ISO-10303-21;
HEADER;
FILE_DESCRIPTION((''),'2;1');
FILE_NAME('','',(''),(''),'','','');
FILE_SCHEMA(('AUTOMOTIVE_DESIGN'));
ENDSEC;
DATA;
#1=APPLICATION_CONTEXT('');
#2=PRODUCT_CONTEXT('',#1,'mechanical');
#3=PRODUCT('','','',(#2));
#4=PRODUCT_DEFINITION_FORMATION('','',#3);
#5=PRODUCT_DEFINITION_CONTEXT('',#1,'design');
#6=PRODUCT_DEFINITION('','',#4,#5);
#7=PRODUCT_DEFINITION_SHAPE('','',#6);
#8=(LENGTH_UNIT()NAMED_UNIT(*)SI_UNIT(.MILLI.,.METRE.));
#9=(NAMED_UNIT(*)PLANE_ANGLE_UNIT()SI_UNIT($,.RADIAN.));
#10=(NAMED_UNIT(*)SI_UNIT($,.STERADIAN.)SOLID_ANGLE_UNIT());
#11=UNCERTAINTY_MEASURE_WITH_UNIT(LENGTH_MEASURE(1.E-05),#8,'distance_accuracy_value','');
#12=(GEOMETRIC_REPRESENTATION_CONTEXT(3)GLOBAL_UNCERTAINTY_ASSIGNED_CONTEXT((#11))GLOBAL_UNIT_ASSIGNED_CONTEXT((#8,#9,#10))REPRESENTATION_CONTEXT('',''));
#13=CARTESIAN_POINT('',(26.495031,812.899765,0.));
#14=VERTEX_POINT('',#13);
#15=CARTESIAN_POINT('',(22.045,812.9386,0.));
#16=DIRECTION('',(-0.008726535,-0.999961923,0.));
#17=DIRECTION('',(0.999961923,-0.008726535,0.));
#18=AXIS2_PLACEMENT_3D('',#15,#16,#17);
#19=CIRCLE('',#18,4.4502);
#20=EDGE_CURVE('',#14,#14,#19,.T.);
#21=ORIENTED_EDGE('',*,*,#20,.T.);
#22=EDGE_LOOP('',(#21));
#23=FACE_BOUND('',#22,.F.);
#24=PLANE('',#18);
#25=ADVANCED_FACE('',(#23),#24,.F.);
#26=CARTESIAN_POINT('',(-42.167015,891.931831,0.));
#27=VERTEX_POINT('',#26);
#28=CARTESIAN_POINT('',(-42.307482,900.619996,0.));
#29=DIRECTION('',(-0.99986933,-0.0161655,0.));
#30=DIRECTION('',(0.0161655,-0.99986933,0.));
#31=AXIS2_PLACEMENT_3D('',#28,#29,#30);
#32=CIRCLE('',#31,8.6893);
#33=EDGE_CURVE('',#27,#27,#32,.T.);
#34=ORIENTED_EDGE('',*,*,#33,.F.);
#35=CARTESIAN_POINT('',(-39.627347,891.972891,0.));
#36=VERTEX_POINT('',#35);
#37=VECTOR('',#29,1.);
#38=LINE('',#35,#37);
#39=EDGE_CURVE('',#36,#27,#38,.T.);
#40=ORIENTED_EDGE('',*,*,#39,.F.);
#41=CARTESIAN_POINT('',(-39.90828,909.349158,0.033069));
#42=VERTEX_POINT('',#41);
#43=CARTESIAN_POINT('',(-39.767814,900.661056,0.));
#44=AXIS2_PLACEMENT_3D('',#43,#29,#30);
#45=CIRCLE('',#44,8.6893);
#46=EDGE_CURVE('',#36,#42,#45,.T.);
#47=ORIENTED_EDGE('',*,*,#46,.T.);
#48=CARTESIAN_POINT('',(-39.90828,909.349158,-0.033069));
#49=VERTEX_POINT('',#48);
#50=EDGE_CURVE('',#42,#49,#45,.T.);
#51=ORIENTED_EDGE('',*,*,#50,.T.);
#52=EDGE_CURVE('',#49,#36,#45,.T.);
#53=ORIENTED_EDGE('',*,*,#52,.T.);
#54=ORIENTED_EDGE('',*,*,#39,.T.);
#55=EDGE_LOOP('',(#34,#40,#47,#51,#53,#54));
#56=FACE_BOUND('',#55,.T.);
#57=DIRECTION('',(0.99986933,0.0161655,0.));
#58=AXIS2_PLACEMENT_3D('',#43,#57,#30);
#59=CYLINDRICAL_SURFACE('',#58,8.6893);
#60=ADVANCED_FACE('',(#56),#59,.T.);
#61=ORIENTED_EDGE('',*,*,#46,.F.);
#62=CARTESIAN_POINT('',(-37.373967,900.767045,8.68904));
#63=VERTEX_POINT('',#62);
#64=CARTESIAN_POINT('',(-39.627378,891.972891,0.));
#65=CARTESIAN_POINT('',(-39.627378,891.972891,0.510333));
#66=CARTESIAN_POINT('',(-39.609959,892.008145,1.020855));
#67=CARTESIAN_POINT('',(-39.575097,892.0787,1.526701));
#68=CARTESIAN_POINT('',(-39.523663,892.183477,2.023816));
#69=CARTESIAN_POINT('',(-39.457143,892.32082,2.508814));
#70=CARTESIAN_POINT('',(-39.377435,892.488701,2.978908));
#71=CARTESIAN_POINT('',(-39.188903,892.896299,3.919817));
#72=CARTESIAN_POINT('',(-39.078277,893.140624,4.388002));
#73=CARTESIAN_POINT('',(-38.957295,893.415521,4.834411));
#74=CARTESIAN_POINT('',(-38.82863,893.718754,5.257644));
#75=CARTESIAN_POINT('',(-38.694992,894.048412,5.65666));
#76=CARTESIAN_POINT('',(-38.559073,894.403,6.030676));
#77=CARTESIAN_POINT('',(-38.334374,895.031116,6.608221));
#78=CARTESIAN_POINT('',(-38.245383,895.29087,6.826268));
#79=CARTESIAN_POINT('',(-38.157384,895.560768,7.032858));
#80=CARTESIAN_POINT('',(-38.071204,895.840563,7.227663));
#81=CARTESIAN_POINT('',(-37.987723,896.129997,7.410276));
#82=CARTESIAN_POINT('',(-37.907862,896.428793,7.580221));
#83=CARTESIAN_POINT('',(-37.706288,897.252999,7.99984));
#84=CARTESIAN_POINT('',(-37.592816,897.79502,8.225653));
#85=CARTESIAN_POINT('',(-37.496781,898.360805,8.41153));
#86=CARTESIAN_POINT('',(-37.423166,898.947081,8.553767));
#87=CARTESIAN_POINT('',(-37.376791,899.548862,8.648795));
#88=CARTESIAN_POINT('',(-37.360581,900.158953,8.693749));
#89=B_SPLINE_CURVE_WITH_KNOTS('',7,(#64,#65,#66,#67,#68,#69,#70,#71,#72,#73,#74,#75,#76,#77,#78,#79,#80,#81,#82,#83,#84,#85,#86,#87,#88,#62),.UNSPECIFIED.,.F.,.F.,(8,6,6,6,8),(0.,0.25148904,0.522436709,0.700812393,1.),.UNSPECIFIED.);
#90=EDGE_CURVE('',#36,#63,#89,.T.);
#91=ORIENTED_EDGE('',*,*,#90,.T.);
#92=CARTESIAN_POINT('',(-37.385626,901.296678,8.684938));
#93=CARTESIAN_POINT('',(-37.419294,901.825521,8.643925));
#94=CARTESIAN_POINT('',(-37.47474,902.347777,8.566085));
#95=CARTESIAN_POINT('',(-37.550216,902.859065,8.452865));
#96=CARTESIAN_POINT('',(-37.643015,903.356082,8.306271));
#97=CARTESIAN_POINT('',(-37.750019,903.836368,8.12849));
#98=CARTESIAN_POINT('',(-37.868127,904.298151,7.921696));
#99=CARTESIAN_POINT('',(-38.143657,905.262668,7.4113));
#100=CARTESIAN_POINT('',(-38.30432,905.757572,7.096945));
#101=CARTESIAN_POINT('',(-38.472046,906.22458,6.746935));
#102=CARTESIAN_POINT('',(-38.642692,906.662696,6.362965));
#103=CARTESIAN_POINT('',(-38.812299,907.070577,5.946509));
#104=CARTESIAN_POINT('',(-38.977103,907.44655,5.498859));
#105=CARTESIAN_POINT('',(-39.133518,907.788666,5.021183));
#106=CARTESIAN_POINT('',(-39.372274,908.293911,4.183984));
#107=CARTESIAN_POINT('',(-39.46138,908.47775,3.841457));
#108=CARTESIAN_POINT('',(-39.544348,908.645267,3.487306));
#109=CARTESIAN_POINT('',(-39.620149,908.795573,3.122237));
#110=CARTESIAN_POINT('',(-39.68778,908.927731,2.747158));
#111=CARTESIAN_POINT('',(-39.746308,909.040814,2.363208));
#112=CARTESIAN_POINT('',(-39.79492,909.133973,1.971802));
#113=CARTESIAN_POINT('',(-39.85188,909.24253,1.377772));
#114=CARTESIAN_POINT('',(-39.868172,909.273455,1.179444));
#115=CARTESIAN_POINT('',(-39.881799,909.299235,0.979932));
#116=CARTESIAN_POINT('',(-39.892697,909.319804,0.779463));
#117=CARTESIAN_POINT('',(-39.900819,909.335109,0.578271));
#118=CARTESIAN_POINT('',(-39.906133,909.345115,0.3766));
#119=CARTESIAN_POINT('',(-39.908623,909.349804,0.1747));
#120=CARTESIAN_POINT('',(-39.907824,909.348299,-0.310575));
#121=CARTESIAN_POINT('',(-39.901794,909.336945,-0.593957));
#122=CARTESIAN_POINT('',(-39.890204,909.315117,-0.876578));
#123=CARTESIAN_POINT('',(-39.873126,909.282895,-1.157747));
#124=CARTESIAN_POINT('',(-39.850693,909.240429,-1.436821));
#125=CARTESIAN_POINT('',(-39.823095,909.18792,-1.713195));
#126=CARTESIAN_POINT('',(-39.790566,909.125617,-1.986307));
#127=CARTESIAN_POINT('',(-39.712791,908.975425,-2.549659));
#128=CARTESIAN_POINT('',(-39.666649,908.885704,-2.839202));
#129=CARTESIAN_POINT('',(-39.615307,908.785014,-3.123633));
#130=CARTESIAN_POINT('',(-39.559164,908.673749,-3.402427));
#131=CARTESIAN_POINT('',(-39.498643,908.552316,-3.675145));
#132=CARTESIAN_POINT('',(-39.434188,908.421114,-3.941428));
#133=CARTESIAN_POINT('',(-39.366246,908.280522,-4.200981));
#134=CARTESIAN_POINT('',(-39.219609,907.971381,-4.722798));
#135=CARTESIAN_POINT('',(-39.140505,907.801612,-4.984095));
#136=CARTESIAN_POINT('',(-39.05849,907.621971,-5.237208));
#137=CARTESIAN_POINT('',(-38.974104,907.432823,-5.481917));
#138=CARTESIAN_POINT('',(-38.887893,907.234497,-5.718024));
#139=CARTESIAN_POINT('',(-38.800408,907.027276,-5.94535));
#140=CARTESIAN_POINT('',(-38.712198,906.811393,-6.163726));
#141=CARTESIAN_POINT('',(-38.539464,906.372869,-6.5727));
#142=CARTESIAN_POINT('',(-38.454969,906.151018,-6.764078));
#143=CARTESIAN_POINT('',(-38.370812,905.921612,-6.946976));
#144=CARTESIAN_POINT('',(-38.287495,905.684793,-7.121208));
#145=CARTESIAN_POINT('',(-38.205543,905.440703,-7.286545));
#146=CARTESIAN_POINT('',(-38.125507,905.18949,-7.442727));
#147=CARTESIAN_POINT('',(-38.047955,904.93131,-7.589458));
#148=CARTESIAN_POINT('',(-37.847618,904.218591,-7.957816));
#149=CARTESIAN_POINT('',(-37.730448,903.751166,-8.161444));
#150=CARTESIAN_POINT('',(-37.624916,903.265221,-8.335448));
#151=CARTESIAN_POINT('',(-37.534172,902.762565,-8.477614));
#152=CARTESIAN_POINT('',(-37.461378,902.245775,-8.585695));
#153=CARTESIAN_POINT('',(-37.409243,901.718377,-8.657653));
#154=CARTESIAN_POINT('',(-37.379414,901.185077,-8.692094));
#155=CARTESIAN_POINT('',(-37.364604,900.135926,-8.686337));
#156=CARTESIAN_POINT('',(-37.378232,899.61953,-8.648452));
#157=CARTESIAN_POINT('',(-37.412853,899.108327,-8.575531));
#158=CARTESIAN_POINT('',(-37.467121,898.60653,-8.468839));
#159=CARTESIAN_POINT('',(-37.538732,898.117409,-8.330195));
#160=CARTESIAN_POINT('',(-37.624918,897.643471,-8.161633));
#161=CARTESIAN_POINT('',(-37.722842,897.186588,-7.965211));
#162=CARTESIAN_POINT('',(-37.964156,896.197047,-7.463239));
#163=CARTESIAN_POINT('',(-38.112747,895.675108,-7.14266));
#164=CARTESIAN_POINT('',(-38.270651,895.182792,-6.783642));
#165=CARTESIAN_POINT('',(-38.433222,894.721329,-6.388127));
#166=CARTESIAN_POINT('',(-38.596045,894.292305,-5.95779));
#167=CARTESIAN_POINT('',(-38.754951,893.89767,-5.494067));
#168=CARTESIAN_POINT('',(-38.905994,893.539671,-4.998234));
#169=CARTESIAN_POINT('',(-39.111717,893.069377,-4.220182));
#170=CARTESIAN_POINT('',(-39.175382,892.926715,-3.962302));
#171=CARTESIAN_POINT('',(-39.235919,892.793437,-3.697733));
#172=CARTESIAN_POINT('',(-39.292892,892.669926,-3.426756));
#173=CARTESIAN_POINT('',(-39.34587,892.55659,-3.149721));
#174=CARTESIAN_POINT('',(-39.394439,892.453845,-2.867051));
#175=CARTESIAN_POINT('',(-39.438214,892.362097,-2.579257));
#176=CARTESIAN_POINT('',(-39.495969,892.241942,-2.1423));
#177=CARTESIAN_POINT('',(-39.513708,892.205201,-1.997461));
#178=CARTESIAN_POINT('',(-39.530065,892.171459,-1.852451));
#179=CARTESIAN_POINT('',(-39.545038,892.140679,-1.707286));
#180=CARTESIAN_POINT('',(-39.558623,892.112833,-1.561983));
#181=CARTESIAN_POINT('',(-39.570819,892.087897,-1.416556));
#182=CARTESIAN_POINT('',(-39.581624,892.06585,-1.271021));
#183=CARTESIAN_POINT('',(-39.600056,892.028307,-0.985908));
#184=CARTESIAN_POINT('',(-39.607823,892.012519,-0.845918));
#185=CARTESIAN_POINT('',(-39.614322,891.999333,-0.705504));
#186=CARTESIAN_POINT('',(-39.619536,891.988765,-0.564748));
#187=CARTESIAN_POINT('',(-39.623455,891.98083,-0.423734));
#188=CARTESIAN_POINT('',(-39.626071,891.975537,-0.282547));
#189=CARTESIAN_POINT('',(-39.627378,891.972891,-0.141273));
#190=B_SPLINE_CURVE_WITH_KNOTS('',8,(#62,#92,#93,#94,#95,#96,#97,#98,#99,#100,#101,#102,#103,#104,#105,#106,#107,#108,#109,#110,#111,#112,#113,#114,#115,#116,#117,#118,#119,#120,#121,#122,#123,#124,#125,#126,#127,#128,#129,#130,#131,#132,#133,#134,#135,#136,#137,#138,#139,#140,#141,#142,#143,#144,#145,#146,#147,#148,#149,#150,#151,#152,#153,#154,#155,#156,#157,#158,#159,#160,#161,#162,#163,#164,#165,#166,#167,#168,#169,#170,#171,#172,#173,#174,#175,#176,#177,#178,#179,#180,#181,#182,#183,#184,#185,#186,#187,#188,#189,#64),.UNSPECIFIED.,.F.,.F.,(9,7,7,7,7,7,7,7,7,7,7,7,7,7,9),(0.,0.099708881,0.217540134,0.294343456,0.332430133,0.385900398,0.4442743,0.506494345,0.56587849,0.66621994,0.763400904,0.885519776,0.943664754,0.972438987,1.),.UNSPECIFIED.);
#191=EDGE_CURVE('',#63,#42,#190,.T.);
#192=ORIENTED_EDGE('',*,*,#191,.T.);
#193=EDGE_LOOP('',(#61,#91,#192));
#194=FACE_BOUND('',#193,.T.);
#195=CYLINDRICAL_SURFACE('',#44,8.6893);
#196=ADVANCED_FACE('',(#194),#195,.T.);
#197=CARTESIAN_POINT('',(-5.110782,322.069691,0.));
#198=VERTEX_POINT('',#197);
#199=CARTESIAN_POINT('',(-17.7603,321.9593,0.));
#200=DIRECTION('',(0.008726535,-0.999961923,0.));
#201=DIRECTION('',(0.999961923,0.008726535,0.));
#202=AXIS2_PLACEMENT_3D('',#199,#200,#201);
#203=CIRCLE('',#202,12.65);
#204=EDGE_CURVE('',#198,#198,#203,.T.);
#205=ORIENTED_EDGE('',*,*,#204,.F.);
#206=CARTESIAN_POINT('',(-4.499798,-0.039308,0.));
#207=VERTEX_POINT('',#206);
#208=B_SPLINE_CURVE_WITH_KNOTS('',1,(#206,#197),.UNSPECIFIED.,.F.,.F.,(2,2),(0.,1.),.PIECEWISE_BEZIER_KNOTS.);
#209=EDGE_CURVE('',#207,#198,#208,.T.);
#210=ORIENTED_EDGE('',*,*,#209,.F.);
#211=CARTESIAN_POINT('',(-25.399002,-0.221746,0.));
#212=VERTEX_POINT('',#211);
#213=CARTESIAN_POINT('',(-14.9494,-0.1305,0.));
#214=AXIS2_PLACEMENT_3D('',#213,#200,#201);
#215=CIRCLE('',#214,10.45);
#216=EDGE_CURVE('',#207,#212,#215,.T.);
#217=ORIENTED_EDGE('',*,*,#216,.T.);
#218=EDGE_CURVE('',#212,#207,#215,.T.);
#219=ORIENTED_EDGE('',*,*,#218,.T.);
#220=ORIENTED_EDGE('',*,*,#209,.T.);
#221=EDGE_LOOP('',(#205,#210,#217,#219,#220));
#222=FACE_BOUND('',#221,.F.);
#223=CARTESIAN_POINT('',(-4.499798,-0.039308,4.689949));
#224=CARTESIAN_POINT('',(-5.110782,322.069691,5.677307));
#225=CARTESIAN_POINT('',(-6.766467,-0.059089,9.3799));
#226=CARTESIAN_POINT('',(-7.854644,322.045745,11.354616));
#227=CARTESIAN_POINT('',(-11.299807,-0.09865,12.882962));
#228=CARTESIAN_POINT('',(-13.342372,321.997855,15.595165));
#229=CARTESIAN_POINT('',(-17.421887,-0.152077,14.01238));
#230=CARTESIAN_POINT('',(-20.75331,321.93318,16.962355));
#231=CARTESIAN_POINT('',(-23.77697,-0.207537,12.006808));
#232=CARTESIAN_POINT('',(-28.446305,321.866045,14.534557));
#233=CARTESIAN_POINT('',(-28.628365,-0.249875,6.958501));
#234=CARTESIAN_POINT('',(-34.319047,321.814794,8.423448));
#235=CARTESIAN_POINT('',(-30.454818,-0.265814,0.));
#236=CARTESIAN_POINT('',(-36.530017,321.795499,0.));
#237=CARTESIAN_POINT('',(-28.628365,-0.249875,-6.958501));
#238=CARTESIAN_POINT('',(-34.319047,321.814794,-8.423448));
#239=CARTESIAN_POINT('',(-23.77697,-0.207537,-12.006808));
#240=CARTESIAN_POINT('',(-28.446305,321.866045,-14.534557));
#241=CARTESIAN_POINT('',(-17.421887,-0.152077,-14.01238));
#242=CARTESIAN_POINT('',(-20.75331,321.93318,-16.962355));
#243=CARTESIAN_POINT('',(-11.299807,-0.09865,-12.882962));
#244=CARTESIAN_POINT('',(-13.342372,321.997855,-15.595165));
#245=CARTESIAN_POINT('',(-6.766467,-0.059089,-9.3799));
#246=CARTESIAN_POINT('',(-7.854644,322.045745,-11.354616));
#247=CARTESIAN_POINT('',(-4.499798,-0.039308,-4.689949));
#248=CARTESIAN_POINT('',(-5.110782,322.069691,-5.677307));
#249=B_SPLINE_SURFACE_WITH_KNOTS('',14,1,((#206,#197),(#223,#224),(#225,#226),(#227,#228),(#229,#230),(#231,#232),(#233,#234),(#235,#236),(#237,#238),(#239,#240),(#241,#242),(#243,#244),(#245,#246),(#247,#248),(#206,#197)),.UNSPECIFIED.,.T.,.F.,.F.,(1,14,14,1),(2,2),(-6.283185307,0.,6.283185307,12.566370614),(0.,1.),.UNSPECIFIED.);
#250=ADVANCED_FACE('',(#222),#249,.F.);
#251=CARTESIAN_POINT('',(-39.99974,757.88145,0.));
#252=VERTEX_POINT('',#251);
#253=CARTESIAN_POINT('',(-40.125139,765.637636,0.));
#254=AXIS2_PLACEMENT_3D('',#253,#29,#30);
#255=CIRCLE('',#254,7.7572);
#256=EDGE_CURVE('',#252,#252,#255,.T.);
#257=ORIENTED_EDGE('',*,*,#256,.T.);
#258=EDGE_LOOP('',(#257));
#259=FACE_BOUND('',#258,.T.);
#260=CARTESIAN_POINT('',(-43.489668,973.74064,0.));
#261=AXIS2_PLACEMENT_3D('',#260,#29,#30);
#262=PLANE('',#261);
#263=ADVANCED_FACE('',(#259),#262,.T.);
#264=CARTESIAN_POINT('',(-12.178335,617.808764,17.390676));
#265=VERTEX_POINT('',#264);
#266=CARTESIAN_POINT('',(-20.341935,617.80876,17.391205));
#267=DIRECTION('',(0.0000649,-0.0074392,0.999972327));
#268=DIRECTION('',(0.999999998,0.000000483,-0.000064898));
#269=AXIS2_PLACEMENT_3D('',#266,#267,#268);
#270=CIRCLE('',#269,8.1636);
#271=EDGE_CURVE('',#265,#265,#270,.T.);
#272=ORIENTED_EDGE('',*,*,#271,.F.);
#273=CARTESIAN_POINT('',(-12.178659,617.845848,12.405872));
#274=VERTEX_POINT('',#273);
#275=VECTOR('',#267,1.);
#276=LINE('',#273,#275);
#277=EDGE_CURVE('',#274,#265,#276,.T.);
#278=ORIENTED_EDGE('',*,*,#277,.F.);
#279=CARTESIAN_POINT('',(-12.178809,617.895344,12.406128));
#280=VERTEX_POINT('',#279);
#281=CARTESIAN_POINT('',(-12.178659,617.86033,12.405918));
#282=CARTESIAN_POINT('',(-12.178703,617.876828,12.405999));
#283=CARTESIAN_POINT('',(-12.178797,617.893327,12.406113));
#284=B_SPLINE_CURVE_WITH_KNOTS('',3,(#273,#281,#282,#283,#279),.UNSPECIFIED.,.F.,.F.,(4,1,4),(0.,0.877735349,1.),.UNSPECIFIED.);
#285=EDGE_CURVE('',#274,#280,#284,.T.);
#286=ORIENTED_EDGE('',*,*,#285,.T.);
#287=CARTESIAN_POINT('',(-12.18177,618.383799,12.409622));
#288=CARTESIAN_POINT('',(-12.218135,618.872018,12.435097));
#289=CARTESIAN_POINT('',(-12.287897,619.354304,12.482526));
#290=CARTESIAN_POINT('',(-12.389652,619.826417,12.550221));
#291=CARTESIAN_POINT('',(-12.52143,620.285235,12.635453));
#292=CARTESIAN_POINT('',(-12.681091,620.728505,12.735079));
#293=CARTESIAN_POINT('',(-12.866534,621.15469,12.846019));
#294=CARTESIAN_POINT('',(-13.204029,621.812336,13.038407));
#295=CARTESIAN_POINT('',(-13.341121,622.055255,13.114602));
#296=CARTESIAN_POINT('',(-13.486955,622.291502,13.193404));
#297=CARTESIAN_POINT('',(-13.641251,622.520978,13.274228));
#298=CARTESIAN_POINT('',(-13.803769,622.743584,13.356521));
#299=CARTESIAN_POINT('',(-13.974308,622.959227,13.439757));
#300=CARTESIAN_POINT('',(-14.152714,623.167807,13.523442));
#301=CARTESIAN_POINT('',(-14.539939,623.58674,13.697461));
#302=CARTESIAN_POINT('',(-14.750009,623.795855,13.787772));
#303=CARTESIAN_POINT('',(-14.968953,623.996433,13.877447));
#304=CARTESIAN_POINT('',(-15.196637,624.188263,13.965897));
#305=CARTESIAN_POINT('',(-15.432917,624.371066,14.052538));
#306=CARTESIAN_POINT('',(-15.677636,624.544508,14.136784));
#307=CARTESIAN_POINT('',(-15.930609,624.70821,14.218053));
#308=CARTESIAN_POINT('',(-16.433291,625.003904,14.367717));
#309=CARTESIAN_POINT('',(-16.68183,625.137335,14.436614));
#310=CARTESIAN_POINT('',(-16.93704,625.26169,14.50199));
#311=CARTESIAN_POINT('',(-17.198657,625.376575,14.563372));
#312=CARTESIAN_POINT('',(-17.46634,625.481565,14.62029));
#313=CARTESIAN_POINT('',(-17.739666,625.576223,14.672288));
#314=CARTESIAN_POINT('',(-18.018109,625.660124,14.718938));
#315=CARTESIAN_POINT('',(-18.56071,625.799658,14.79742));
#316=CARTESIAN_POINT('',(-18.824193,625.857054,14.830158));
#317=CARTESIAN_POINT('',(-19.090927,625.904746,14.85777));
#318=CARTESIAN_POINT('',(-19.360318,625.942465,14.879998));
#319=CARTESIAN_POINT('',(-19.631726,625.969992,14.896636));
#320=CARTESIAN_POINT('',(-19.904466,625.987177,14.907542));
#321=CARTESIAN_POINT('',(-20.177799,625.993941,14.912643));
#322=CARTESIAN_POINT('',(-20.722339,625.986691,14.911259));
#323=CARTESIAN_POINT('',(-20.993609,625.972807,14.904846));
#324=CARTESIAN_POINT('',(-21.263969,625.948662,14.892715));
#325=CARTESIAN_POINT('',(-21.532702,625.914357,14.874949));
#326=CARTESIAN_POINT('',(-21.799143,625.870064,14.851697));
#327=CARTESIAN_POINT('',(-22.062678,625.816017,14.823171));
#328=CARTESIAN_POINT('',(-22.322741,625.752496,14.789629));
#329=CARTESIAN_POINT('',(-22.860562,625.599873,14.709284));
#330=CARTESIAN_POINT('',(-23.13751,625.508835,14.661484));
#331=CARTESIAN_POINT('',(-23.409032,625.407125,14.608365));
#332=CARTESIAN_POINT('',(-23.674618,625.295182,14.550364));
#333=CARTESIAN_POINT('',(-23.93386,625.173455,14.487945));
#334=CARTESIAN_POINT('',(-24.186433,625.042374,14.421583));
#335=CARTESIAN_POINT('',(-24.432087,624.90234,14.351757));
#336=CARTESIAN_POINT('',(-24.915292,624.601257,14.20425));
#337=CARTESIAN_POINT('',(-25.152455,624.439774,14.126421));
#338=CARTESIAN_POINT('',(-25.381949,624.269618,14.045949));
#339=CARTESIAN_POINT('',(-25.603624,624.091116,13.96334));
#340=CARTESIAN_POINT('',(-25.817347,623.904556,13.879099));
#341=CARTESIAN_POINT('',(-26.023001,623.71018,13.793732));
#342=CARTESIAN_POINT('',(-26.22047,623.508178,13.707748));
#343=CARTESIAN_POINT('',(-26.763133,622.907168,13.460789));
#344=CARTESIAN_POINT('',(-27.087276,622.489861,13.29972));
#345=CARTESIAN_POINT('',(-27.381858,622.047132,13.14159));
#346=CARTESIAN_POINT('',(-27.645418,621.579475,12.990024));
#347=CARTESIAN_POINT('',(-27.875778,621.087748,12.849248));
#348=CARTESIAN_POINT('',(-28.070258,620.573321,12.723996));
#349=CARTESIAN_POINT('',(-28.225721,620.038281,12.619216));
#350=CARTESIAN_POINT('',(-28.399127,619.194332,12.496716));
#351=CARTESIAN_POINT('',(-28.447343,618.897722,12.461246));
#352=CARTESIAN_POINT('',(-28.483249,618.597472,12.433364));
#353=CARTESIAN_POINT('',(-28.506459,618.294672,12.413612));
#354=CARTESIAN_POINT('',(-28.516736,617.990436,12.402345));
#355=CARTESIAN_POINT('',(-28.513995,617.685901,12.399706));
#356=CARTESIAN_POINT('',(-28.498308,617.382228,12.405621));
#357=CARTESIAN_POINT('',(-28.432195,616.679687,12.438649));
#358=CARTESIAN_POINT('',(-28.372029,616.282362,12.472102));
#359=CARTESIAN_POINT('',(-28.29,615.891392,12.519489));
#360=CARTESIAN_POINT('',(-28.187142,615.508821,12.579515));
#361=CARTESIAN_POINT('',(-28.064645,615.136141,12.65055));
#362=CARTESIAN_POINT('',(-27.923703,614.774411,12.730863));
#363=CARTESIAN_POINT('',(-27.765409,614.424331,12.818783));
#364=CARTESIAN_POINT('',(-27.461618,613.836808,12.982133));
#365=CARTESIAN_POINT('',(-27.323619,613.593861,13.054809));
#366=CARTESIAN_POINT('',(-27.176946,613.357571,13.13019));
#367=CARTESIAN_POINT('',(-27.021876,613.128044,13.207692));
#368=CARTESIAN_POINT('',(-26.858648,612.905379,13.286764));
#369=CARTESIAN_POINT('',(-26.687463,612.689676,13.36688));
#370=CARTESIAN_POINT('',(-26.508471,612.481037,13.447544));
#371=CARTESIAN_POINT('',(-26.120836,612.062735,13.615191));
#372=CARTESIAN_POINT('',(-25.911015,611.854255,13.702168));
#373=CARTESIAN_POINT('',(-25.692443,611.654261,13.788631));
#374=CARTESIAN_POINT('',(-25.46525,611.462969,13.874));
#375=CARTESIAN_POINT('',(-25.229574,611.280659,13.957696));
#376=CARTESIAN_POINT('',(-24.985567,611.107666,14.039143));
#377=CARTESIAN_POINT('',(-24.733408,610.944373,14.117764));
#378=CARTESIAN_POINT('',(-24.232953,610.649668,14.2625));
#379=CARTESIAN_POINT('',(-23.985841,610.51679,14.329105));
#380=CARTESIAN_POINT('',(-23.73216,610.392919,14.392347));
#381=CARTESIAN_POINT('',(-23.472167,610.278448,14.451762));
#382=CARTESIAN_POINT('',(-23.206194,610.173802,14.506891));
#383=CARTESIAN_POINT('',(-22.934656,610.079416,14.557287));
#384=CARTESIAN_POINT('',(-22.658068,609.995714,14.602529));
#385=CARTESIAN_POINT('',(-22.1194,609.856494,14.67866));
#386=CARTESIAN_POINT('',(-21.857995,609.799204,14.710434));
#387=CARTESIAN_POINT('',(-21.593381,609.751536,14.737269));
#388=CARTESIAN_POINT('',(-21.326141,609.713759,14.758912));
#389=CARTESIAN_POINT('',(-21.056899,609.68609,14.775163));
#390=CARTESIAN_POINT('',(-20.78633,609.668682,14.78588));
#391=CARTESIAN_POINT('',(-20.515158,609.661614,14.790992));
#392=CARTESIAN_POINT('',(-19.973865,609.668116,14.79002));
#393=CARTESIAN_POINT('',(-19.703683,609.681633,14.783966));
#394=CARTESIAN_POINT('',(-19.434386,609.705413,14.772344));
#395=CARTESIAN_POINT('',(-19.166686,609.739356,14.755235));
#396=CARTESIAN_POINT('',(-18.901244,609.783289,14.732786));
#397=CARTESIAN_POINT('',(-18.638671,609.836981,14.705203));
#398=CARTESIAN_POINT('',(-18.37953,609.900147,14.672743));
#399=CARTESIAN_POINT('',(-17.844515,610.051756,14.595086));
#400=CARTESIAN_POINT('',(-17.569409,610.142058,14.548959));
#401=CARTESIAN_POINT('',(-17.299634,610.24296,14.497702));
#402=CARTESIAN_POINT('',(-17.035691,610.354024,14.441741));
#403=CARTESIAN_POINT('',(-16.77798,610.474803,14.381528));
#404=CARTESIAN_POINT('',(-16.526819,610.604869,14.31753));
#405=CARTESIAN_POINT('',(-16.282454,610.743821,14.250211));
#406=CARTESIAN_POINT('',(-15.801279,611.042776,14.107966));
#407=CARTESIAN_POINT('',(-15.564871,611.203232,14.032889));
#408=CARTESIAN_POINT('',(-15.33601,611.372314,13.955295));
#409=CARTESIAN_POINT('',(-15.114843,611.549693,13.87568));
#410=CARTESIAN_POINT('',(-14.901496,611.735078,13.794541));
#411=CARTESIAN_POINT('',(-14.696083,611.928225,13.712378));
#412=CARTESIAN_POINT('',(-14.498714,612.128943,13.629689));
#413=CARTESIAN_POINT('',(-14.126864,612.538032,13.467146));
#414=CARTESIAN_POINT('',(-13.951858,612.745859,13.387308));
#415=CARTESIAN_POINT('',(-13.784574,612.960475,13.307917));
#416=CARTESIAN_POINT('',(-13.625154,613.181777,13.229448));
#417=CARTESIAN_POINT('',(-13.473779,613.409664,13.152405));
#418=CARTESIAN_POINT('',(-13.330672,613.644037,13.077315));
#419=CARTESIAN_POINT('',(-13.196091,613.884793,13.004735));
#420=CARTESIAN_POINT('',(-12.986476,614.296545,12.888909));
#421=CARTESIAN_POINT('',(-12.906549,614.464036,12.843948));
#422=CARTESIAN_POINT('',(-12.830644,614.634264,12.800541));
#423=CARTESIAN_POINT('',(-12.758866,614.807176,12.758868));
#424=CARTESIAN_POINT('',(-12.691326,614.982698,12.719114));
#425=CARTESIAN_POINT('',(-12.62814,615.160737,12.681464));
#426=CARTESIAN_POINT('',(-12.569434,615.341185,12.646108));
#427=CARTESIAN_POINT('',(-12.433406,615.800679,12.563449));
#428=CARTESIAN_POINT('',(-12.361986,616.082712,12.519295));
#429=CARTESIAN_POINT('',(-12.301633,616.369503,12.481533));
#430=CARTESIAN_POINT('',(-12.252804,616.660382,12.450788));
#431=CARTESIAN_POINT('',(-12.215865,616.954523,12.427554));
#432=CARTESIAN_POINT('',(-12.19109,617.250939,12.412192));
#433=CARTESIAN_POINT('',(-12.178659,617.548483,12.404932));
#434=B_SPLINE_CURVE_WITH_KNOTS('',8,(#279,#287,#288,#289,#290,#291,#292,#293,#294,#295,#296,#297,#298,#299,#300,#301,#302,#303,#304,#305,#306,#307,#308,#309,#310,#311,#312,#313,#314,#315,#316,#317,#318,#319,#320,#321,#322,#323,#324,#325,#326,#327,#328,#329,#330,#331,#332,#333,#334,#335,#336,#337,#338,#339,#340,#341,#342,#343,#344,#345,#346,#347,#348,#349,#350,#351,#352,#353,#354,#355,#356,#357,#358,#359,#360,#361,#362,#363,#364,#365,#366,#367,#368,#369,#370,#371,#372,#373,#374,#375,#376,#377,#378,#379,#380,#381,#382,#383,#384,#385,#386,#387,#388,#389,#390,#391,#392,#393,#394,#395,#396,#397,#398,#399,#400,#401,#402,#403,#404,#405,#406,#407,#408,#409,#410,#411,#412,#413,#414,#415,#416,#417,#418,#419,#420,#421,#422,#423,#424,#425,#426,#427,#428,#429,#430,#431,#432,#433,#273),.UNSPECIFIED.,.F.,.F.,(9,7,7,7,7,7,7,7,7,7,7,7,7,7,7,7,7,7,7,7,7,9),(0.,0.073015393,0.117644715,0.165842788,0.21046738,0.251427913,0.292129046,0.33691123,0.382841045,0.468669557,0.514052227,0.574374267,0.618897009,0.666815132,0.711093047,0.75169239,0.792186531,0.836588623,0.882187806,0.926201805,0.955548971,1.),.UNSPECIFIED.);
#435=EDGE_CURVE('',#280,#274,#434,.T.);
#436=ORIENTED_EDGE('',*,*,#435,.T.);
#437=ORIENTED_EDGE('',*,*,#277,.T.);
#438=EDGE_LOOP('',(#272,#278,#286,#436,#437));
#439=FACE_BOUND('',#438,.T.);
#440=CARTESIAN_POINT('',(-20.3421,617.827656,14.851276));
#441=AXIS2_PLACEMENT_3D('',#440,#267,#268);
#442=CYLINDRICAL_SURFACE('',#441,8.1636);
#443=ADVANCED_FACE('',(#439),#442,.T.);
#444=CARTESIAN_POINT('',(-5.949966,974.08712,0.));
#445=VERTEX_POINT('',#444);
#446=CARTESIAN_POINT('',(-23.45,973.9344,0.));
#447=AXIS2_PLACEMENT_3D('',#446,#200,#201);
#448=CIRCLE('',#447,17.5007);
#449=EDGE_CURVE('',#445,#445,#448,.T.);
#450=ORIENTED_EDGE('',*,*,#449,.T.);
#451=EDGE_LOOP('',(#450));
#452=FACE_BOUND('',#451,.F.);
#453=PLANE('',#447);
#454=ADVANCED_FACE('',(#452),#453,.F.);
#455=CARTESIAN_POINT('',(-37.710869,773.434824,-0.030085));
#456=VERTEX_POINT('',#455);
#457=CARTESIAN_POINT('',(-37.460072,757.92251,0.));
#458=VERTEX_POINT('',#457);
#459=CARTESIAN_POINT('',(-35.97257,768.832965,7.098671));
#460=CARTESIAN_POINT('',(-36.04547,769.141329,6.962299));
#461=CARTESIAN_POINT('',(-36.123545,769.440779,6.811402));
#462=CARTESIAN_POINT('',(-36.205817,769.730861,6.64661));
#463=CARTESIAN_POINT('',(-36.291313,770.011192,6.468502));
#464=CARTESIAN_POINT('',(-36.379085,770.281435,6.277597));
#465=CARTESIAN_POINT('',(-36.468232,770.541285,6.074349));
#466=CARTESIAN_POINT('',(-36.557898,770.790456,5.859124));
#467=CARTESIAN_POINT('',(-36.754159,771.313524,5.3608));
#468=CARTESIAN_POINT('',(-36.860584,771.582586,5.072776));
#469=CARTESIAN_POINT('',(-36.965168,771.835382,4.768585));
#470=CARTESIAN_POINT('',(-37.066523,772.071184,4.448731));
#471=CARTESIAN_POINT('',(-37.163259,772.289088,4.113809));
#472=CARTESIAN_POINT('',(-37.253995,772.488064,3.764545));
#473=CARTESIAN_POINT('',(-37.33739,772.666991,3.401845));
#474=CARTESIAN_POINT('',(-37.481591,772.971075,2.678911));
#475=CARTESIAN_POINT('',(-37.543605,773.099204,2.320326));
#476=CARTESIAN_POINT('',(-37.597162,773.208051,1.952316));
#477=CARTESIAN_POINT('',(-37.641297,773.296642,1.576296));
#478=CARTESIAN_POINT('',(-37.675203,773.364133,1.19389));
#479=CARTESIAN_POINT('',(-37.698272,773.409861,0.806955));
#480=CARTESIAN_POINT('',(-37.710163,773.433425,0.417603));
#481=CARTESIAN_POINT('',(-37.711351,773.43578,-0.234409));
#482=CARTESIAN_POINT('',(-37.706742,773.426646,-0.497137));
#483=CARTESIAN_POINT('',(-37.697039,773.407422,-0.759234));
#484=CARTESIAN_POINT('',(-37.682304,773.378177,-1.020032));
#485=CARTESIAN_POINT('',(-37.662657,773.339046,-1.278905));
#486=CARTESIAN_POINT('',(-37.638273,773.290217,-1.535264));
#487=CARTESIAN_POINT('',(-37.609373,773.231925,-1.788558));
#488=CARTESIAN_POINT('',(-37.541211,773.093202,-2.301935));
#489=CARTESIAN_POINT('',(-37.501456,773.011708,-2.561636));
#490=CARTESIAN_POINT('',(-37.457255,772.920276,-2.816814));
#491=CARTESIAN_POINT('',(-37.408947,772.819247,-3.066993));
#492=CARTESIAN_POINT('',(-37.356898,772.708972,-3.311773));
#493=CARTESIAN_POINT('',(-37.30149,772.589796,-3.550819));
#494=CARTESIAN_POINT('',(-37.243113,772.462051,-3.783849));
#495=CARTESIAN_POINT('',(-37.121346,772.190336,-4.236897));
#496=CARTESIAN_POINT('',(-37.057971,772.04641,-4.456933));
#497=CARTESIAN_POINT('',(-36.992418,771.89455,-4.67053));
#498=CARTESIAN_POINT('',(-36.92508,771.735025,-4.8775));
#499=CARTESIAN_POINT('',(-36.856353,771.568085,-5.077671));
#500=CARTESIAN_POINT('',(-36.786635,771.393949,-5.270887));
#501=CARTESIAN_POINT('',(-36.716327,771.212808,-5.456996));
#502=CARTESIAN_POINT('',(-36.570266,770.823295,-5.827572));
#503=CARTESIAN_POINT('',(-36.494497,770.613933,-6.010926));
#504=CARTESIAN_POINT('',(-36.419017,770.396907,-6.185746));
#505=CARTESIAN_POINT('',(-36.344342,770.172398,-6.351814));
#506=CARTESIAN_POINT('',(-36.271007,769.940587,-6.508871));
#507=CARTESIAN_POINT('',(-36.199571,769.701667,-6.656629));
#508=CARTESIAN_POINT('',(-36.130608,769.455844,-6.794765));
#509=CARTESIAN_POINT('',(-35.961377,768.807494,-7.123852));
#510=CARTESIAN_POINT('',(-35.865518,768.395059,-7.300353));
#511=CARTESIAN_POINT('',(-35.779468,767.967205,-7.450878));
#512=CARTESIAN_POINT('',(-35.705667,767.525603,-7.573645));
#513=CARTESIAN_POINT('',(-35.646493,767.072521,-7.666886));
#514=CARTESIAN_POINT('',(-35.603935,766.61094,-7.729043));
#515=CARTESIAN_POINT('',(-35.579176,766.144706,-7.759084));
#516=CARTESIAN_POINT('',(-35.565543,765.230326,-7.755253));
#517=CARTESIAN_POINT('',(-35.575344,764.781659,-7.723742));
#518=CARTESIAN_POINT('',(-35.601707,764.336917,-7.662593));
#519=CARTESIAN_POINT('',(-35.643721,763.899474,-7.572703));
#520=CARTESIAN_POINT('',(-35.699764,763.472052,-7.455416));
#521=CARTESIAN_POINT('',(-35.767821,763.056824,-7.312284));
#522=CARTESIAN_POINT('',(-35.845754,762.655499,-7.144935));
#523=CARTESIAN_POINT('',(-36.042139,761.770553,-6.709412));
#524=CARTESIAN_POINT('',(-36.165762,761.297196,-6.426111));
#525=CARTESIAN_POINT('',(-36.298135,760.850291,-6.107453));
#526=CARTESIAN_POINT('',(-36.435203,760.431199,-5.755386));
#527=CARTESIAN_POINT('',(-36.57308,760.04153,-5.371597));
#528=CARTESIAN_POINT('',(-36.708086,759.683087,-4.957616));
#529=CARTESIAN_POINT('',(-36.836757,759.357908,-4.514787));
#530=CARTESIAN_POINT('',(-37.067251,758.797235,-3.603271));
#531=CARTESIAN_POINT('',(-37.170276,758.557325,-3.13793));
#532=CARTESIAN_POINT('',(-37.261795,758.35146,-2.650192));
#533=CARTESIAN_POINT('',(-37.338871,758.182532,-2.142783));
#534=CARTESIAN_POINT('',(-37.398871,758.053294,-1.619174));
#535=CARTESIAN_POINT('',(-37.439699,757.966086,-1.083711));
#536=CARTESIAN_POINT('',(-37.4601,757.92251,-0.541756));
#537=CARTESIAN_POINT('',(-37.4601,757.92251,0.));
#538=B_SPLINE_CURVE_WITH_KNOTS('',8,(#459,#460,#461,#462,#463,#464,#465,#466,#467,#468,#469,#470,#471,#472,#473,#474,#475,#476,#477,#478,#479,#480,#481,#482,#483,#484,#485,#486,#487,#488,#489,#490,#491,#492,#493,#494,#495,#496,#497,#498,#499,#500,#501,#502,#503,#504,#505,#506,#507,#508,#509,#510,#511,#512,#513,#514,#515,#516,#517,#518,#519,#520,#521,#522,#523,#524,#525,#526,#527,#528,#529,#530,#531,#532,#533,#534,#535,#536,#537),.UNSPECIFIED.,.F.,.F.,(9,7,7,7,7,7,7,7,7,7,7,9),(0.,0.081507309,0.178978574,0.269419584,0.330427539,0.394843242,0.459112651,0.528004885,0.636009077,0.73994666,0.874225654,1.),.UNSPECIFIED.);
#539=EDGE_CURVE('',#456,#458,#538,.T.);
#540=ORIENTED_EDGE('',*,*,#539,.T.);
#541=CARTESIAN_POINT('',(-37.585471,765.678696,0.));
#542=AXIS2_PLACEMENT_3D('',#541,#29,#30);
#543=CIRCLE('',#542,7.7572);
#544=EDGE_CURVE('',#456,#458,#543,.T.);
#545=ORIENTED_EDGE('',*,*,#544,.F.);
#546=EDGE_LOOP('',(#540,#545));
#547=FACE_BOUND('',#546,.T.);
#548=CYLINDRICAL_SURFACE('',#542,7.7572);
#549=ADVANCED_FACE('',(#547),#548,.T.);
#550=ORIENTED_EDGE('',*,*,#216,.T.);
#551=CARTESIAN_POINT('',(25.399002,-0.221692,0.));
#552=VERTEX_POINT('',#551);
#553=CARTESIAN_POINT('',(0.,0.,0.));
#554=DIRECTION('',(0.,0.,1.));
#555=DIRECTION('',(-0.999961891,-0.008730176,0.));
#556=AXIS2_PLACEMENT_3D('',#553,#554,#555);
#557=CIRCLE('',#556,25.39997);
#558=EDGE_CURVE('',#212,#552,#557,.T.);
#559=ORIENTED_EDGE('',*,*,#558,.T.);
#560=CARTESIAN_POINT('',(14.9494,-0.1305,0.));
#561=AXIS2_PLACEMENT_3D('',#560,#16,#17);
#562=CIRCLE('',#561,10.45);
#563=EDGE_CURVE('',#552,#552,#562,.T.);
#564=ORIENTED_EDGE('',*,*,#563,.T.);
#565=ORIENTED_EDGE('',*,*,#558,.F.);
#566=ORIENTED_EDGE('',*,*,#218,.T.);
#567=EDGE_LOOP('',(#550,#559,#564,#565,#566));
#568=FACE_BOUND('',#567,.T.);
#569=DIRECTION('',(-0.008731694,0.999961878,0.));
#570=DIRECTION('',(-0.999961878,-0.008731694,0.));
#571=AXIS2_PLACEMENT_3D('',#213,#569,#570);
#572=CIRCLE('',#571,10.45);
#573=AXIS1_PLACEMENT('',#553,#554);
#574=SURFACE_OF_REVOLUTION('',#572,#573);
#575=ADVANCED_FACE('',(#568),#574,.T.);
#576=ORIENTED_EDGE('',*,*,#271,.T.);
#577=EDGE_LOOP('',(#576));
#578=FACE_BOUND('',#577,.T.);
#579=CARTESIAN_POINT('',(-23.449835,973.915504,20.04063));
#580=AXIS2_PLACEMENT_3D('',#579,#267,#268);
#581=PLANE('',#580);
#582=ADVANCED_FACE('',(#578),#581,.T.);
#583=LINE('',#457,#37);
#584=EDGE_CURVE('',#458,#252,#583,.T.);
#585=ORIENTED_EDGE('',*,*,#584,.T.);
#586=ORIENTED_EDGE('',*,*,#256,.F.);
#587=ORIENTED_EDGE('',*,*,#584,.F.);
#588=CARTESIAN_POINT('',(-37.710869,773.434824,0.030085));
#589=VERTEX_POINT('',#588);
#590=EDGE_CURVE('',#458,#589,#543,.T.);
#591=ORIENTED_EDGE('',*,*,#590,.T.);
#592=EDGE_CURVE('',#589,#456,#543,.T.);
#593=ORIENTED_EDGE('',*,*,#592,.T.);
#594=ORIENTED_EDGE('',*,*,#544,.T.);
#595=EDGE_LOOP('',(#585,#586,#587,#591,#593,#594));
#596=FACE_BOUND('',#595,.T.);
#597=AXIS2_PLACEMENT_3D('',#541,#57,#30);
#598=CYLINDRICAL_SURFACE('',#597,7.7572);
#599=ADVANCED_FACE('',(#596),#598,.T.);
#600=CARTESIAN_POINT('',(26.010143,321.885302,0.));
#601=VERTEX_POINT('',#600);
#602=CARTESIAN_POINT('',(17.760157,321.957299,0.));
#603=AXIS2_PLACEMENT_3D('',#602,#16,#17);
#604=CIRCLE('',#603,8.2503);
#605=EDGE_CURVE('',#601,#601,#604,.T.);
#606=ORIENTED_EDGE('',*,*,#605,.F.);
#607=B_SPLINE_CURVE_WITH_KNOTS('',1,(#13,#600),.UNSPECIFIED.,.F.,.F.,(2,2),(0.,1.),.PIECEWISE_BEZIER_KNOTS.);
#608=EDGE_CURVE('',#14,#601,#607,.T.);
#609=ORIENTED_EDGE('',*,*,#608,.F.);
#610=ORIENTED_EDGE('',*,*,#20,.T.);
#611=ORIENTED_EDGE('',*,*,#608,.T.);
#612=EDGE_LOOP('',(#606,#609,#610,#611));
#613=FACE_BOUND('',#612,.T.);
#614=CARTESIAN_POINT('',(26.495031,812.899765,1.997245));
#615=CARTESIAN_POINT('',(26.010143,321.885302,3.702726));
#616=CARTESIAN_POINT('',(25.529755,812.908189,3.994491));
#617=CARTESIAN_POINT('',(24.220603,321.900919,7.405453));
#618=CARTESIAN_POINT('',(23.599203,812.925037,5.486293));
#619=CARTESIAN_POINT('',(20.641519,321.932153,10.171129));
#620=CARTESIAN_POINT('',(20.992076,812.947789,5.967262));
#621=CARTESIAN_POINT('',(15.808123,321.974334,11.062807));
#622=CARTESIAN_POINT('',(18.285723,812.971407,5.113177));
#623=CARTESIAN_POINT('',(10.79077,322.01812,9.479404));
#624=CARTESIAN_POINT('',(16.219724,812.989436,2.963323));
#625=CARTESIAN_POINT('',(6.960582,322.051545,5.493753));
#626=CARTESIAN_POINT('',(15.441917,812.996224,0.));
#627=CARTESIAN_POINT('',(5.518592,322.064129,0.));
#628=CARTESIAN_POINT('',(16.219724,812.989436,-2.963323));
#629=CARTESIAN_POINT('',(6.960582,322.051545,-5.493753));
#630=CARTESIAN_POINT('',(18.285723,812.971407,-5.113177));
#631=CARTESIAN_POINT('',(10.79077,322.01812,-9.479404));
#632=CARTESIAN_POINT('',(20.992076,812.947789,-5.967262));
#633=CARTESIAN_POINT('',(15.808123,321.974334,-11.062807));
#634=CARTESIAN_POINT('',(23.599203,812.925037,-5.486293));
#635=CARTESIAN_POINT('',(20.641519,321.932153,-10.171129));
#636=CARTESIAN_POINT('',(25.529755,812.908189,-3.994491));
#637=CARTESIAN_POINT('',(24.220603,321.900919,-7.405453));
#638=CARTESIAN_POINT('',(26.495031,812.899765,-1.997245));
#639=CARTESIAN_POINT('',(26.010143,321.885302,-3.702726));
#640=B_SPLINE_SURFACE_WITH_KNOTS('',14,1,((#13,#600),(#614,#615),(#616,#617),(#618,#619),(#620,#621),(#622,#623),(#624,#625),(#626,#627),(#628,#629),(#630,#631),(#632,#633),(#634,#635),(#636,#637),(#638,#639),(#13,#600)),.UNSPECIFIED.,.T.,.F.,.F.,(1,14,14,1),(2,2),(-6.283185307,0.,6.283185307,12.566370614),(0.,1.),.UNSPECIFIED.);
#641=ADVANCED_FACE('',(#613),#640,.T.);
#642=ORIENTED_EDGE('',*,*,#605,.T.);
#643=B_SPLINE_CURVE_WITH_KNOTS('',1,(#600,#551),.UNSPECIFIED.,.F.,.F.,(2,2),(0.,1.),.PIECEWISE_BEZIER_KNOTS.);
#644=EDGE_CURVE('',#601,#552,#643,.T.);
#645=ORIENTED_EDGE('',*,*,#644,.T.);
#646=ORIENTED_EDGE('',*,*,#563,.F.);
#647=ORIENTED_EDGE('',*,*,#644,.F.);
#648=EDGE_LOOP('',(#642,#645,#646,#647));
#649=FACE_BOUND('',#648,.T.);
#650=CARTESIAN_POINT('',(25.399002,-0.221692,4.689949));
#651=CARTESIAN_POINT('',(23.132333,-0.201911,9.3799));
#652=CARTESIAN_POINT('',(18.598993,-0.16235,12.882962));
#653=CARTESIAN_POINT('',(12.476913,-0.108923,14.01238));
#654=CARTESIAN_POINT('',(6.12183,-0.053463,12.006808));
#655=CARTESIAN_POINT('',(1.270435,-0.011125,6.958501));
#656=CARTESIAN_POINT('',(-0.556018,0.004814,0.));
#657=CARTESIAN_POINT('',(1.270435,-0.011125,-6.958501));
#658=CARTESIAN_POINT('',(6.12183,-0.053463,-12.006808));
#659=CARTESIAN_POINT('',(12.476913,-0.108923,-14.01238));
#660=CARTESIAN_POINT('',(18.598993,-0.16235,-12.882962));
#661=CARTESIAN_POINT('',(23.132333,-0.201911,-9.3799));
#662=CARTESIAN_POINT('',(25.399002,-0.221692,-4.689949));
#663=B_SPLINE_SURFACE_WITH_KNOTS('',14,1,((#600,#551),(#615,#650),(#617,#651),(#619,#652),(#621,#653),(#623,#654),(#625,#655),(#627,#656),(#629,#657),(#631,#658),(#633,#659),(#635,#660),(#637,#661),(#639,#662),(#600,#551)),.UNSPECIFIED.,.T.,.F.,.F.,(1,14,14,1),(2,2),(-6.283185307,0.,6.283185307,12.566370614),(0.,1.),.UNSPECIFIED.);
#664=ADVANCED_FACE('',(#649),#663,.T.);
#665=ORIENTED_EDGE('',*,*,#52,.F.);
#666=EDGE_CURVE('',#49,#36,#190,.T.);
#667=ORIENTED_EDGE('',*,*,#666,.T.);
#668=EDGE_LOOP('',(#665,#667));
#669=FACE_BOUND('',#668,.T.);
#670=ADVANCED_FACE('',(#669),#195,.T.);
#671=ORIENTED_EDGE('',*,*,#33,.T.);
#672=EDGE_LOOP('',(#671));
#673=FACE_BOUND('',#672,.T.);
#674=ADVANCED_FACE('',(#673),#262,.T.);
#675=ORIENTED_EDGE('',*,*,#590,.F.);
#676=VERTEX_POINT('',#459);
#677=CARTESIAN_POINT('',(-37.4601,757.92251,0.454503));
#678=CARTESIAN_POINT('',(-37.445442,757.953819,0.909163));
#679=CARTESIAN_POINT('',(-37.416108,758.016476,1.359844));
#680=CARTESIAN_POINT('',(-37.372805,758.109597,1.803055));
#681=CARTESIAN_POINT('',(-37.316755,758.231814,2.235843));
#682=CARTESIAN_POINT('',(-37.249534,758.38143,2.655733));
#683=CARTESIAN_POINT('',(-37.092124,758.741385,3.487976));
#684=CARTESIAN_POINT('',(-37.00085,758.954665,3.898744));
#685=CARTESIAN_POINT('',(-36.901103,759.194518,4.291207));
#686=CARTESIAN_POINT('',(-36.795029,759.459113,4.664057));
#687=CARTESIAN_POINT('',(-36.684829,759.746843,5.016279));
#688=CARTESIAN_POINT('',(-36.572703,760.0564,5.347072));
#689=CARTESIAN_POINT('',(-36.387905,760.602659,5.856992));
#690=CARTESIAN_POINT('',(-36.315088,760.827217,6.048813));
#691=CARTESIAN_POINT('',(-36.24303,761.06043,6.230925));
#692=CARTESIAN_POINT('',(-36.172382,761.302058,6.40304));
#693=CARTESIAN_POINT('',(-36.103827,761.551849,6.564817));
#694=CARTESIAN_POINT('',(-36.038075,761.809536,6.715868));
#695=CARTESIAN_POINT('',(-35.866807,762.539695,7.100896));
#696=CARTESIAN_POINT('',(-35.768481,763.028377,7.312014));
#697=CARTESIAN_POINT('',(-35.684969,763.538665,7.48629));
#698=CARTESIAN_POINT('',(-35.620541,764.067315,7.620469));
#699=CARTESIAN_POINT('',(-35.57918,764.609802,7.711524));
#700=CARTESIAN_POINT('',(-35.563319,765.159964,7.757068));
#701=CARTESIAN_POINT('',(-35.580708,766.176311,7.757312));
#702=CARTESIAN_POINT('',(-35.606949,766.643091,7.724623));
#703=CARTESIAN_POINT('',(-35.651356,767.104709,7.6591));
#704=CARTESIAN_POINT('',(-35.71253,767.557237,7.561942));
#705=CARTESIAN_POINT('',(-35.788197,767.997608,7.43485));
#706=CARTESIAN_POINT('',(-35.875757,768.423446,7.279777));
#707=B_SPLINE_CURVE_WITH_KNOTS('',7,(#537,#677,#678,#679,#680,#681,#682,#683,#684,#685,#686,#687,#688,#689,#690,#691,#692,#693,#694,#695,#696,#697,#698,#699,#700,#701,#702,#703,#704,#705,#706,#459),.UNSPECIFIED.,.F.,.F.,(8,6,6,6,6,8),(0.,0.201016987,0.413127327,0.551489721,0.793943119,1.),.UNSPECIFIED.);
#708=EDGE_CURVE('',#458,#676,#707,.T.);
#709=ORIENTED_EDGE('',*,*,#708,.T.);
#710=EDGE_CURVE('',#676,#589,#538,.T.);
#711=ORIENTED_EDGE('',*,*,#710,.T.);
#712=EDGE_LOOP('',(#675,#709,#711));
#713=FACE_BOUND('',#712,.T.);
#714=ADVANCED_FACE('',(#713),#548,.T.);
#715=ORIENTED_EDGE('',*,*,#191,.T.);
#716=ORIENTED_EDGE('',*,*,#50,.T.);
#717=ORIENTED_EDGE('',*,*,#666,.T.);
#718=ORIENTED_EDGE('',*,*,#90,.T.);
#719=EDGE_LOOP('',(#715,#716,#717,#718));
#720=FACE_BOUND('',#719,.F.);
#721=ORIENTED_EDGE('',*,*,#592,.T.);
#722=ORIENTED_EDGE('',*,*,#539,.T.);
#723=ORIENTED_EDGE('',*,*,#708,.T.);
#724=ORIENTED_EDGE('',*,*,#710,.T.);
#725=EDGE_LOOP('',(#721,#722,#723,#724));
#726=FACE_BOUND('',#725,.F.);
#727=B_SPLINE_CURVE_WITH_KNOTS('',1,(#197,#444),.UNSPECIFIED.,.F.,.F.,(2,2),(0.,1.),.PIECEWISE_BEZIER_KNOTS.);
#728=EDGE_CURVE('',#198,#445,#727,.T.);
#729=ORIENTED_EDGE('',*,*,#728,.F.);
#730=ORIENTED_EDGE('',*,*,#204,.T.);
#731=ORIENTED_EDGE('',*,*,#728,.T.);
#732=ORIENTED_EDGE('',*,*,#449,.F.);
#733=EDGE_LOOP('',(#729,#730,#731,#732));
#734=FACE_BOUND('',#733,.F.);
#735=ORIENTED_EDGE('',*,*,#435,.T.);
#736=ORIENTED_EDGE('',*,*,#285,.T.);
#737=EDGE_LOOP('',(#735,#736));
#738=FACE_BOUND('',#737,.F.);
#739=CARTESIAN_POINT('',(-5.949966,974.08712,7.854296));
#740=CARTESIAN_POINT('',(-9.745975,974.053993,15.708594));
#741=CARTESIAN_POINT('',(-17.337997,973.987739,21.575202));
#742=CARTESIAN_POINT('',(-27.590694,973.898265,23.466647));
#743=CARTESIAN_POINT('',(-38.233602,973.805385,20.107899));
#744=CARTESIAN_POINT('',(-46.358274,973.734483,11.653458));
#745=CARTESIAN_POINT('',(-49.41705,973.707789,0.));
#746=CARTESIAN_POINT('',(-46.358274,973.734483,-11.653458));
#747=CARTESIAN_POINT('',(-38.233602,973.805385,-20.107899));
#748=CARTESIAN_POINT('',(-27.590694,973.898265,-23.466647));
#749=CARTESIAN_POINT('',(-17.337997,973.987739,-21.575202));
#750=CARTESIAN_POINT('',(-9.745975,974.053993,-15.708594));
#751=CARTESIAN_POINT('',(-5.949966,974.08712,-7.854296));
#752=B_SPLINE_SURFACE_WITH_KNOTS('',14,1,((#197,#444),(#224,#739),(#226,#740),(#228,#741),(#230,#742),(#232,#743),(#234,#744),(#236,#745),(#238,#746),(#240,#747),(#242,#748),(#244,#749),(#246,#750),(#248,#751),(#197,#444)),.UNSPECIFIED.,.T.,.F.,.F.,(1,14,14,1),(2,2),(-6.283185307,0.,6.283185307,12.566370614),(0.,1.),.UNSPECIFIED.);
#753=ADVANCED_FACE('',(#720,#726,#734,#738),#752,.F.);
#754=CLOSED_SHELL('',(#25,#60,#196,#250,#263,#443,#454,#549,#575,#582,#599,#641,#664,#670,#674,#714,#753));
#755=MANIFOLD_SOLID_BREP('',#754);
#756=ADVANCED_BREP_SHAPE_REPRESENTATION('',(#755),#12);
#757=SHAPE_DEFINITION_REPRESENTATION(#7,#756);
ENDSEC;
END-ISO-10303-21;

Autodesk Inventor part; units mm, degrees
sketch "bore path" plane through (0, 0, 0) normal (0, 0, 1) x (1, 0, 0)
  line L0 (22.045, 812.9386) -> (17.7602, 321.9573)
  line L1 (-26.2163, 1290.9204) -> (-23.45, 973.9344)
  arc A0 (-14.9494, -0.1305) -> (14.9494, -0.1305) centre (0, 0) ccw
  line L2 (0, 0) -> (0, 156.1202) construction
  line L3 (22.045, 812.9386) -> (26.495, 812.8997)
  line L4 (26.495, 812.8997) -> (26.0102, 321.8853)
  line L5 (17.7602, 321.9573) -> (26.0102, 321.8853) construction
  line L6 (17.7602, 321.9573) -> (14.9494, -0.1305)
  line L7 (26.0102, 321.8853) -> (25.399, -0.2217)
  line L8 (-30.4098, 321.8489) -> (-25.399, -0.2217)
  line L9 (-30.4098, 321.8489) -> (-17.7603, 321.9593) construction
  line L10 (-24.085, 321.9041) -> (-24.0265, 315.1961) construction
  line L11 (14.9494, -0.1305) -> (25.399, -0.2217) construction
  line L12 (-14.9494, -0.1305) -> (-25.399, -0.2217) construction
  line L13 (20.1742, -0.1761) -> (20.1742, 3.9012) construction
  line L14 (-17.7603, 321.9593) -> (-14.9494, -0.1305)
  line L15 (-20.1742, -0.1761) -> (-19.9393, -27.0948) construction
  arc A1 (-25.399, -0.2217) -> (25.399, -0.2217) centre (0, 0) ccw
  line L16 (21.8852, 321.9213) -> (21.7783, 309.6646) construction
  line L17 (-45.6155, 1290.7511) -> (-26.2163, 1290.9204)
  line L18 (-30.4098, 321.8489) -> (-40.95, 973.7817)
  line L19 (-40.95, 973.7817) -> (-45.6155, 1290.7511)
  line L20 (-40.95, 973.7817) -> (-23.45, 973.9344) construction
  line L21 (-23.45, 973.9344) -> (-17.7603, 321.9593)
  dimension "d3" = 813.1
  dimension "d5" = 179
  dimension "d7" = 1291.1
  dimension "d8" = 491
  dimension "d9" = 4.45
  dimension "d10" = 8.25
  dimension "d13" = 12.65
  dimension "d14" = 322.102
  dimension "d18" = 25.4
  dimension "d20" = 10.45
  dimension "d22" = 652
  dimension "d23" = 17.5
  dimension "d25" = 19.4
ref_plane "Work Plane2" through (22.045, 812.9386, 0) normal (-0.0087265, -0.9999619, 0) x (0.9999619, -0.0087265, 0)
sketch "tenor" plane through (22.045, 812.9386, 0) normal (-0.0087265, -0.9999619, 0) x (0.9999619, -0.0087265, 0)
  circle A0 centre (0, 0) radius 4.4502
  line L0 (0, 0) -> (4.4502, 0) projected
ref_plane "Work Plane3" through (21.8852, 321.9213, 0) normal (-0.0087265, -0.9999619, 0) x (0.9999619, -0.0087265, 0)
sketch "boot" plane through (21.8852, 321.9213, 0) normal (-0.0087265, -0.9999619, 0) x (0.9999619, -0.0087265, 0)
  circle A0 centre (-4.1252, 0) radius 8.2503
  line L0 (-4.1252, 0) -> (4.1252, 0) construction
  point P0 (-19.0752, 0)
ref_plane "Work Plane4" through (14.9494, -0.1305, 0) normal (-0.0087265, -0.9999619, 0) x (0.9999619, -0.0087265, 0)
sketch "turn entrance" plane through (14.9494, -0.1305, 0) normal (-0.0087265, -0.9999619, 0) x (0.9999619, -0.0087265, 0)
  circle A0 centre (0, 0) radius 10.45
  line L0 (0, 0) -> (10.45, 0) construction
  point P0 (-14.95, 0)
ref_plane "Work Plane5" through (-14.9494, -0.1305, 0) normal (0.0087265, -0.9999619, 0) x (0.9999619, 0.0087265, 0)
sketch "turn exit" plane through (-14.9494, -0.1305, 0) normal (0.0087265, -0.9999619, 0) x (0.9999619, 0.0087265, 0)
  circle A0 centre (0, 0) radius 10.45
  line L0 (0, 0) -> (-10.45, 0) construction
  point P0 (14.95, 0)
ref_plane "Work Plane6" through (-17.7603, 321.9593, 0) normal (0.0087265, -0.9999619, 0) x (0.9999619, 0.0087265, 0)
sketch "bass" plane through (-17.7603, 321.9593, 0) normal (0.0087265, -0.9999619, 0) x (0.9999619, 0.0087265, 0)
  circle A0 centre (0, 0) radius 12.65
  line L0 (-12.65, 0) -> (0, 0) construction
  point P0 (14.95, 0)
ref_plane "Work Plane7" through (-23.45, 973.9344, 0) normal (0.0087265, -0.9999619, 0) x (0.9999619, 0.0087265, 0)
sketch "bell" plane through (-23.45, 973.9344, 0) normal (0.0087265, -0.9999619, 0) x (0.9999619, 0.0087265, 0)
  circle A0 centre (0, 0) radius 17.5007
  line L0 (-17.5007, 0) -> (0, 0) construction
  point P0 (14.95, 0)
ref_plane "Work Plane8" through (-26.2163, 1290.9204, 0) normal (0.0087265, -0.9999619, 0) x (0.9999619, 0.0087265, 0)
sketch "bell exit" plane through (-26.2163, 1290.9204, 0) normal (0.0087265, -0.9999619, 0) x (0.9999619, 0.0087265, 0)
  circle A0 centre (0, 0) radius 19.4
  line L0 (-19.4, 0) -> (0, 0) projected
  point P0 (14.95, 0)
sketch "Sketch12" plane through (0, 0, 0) normal (0, 0, 1) x (1, 0, 0)
  point P0 (0, 0)
loft "tenor loft" add profiles "tenor", "boot"
loft "boot loft 1" add profiles "boot", "turn entrance"
loft "boot loft 3" add profiles "turn exit", "bass"
loft "bass loft" add profiles "bass", "bell"
feature "bell loft" [suppressed]
sketch "turn path" plane through (0, 0, 0) normal (0, 0, 1) x (1, 0, 0)
  arc A0 (-14.9494, -0.1305) -> (14.9494, -0.1305) centre (0, 0) ccw projected
  arc A1 (-14.95, 0) -> (14.95, 0) centre (0, 0) ccw
  line L0 (25.399, -0.2217) -> (4.4998, -0.0393) projected
  line L1 (0, 0) -> (14.95, 0)
sweep "turn" add profiles "turn entrance" path "turn path" path curves A0
sketch "Sketch15" plane through (-26.2163, 1290.9204, 0) normal (-0.0087265, 0.9999619, 0) x (0.9999619, 0.0087265, 0)
  line L0 (0, 0) -> (0, -19.4) construction
  circle A0 centre (0, 0) radius 19.4 projected
  point P0 (14.95, 0)
ref_plane "Work Plane9" through (-26.2163, 1290.9204, 19.4) normal (0.0000523, -0.0059913, 0.9999821) x (1, 0, -0.0000523)
sketch "h1" plane through (-26.2163, 1290.9204, 19.4) normal (0.0000523, -0.0059913, 0.9999821) x (1, 0, -0.0000523)
  circle A0 centre (0.001, -226.1162) radius 7.5
  ellipse E0 centre (0.001, -0.1162) end of major axis (-19.3982, -0.2855) minor radius 0.1162 projected
  line L0 (0.001, -0.1162) -> (0.001, -226.1162) construction
  point P0 (26.2173, -1291.0134)
  dimension "h1x" = 226
  dimension "h1d" = 15
extrude "h1 extrude" [suppressed]
sketch "Sketch17" plane through (-23.45, 973.9344, 0) normal (-0.0087265, 0.9999619, 0) x (0.9999619, 0.0087265, 0)
  line L0 (0, 0) -> (0, -17.5007) construction
  circle A0 centre (0, 0) radius 17.5007 projected
  point P0 (14.95, 0)
  point P1 (-17.5007, 0)
  point P2 (-15.156, -8.7503)
  dimension "h2theta" = 90
  dimension "h5theta" = 60
ref_plane "Work Plane10" through (-40.95, 973.7817, 0) normal (-0.9998693, -0.0161655, 0) x (0.0161655, -0.9998693, 0)
sketch "h2" plane through (-40.95, 973.7817, 0) normal (-0.9998693, -0.0161655, 0) x (0.0161655, -0.9998693, 0)
  circle A0 centre (73.1302, 0) radius 8.6893
  ellipse E0 centre (0.1302, 0) end of major axis (0.1302, -17.5007) minor radius 0.1302 projected
  line L0 (0.1302, 0) -> (73.1302, 0) construction
  point P0 (974.3165, 0)
  dimension "h2d" = 17.3787
  dimension "h2x" = 73
extrude "h2 extrude" add sketch "h2" along normal blind 2.54 and the other way blind 5 contours A0
sketch "h3" plane through (-40.95, 973.7817, 0) normal (-0.9998693, -0.0161655, 0) x (0.0161655, -0.9998693, 0)
  circle A0 centre (208.1302, 0) radius 7.7572
  ellipse E0 centre (0.1302, 0) end of major axis (0.1302, -17.5007) minor radius 0.1302 projected
  line L0 (0.1302, 0) -> (208.1302, 0) construction
  point P0 (974.3165, 0)
  dimension "h3d" = 15.5143
  dimension "h3x" = 208
extrude "h3 extrude" add sketch "h3" along normal blind 2.54 and the other way blind 5 contours A0
ref_plane "Work Plane11" through (-23.45, 973.9344, 17.5007) normal (0.0000649, -0.0074392, 0.9999723) x (1, 0, -0.0000649)
sketch "h4" plane through (-23.45, 973.9344, 17.5007) normal (0.0000649, -0.0074392, 0.9999723) x (1, 0, -0.0000649)
  ellipse E0 centre (0.0011, -0.1302) end of major axis (-17.4989, -0.2829) minor radius 0.1302 projected
  ellipse E1 centre (5.6908, -652.0873) end of major axis (-6.9587, -652.1977) minor radius 0.0941 projected
  line L0 (0.0011, -0.1302) -> (5.6908, -652.0873) construction
  circle A0 centre (3.1079, -356.1166) radius 8.1636
  line L1 (0.0011, -0.1302) -> (3.1079, -356.1166) construction
  point P0 (23.4511, -974.0377)
  dimension "h4d" = 16.3271
  dimension "h4x" = 356
extrude "h4 extrude" add sketch "h4" along normal blind 2.54 and the other way blind 5 contours A0
ref_plane "Work Plane12" through (-38.6054, 973.8022, 8.7503) normal (-0.8659035, -0.0149964, 0.4999862) x (0.0173162, -0.9998501, 0)
sketch "Sketch21" plane through (-38.6054, 973.8022, 8.7503) normal (-0.8659035, -0.0149964, 0.4999862) x (0.0173162, -0.9998501, 0)
  circle A0 centre (439.5172, -106.0338) radius 7.3304
  ellipse E0 centre (0.1302, -0.0006) end of major axis (0.055, -17.5011) minor radius 0.1302 projected
  line L0 (0.1302, -0.0006) -> (439.5172, -106.0338)
  point P0 (974.3247, 3.2902)
  dimension "h5x" = 452
  dimension "h5d" = 14.6609
sketch "Sketch22" plane through (-17.7603, 321.9593, 0) normal (-0.0087265, 0.9999619, 0) x (0.9999619, 0.0087265, 0)
  circle A0 centre (0, 0) radius 12.65 projected
  line L0 (0, 0) -> (0, -12.7) construction
  point P0 (14.95, 0)
  point P1 (-10.9552, -6.325)
  point P2 (0, -6.35)
  dimension "d78" = 60
properties part number "bore"
